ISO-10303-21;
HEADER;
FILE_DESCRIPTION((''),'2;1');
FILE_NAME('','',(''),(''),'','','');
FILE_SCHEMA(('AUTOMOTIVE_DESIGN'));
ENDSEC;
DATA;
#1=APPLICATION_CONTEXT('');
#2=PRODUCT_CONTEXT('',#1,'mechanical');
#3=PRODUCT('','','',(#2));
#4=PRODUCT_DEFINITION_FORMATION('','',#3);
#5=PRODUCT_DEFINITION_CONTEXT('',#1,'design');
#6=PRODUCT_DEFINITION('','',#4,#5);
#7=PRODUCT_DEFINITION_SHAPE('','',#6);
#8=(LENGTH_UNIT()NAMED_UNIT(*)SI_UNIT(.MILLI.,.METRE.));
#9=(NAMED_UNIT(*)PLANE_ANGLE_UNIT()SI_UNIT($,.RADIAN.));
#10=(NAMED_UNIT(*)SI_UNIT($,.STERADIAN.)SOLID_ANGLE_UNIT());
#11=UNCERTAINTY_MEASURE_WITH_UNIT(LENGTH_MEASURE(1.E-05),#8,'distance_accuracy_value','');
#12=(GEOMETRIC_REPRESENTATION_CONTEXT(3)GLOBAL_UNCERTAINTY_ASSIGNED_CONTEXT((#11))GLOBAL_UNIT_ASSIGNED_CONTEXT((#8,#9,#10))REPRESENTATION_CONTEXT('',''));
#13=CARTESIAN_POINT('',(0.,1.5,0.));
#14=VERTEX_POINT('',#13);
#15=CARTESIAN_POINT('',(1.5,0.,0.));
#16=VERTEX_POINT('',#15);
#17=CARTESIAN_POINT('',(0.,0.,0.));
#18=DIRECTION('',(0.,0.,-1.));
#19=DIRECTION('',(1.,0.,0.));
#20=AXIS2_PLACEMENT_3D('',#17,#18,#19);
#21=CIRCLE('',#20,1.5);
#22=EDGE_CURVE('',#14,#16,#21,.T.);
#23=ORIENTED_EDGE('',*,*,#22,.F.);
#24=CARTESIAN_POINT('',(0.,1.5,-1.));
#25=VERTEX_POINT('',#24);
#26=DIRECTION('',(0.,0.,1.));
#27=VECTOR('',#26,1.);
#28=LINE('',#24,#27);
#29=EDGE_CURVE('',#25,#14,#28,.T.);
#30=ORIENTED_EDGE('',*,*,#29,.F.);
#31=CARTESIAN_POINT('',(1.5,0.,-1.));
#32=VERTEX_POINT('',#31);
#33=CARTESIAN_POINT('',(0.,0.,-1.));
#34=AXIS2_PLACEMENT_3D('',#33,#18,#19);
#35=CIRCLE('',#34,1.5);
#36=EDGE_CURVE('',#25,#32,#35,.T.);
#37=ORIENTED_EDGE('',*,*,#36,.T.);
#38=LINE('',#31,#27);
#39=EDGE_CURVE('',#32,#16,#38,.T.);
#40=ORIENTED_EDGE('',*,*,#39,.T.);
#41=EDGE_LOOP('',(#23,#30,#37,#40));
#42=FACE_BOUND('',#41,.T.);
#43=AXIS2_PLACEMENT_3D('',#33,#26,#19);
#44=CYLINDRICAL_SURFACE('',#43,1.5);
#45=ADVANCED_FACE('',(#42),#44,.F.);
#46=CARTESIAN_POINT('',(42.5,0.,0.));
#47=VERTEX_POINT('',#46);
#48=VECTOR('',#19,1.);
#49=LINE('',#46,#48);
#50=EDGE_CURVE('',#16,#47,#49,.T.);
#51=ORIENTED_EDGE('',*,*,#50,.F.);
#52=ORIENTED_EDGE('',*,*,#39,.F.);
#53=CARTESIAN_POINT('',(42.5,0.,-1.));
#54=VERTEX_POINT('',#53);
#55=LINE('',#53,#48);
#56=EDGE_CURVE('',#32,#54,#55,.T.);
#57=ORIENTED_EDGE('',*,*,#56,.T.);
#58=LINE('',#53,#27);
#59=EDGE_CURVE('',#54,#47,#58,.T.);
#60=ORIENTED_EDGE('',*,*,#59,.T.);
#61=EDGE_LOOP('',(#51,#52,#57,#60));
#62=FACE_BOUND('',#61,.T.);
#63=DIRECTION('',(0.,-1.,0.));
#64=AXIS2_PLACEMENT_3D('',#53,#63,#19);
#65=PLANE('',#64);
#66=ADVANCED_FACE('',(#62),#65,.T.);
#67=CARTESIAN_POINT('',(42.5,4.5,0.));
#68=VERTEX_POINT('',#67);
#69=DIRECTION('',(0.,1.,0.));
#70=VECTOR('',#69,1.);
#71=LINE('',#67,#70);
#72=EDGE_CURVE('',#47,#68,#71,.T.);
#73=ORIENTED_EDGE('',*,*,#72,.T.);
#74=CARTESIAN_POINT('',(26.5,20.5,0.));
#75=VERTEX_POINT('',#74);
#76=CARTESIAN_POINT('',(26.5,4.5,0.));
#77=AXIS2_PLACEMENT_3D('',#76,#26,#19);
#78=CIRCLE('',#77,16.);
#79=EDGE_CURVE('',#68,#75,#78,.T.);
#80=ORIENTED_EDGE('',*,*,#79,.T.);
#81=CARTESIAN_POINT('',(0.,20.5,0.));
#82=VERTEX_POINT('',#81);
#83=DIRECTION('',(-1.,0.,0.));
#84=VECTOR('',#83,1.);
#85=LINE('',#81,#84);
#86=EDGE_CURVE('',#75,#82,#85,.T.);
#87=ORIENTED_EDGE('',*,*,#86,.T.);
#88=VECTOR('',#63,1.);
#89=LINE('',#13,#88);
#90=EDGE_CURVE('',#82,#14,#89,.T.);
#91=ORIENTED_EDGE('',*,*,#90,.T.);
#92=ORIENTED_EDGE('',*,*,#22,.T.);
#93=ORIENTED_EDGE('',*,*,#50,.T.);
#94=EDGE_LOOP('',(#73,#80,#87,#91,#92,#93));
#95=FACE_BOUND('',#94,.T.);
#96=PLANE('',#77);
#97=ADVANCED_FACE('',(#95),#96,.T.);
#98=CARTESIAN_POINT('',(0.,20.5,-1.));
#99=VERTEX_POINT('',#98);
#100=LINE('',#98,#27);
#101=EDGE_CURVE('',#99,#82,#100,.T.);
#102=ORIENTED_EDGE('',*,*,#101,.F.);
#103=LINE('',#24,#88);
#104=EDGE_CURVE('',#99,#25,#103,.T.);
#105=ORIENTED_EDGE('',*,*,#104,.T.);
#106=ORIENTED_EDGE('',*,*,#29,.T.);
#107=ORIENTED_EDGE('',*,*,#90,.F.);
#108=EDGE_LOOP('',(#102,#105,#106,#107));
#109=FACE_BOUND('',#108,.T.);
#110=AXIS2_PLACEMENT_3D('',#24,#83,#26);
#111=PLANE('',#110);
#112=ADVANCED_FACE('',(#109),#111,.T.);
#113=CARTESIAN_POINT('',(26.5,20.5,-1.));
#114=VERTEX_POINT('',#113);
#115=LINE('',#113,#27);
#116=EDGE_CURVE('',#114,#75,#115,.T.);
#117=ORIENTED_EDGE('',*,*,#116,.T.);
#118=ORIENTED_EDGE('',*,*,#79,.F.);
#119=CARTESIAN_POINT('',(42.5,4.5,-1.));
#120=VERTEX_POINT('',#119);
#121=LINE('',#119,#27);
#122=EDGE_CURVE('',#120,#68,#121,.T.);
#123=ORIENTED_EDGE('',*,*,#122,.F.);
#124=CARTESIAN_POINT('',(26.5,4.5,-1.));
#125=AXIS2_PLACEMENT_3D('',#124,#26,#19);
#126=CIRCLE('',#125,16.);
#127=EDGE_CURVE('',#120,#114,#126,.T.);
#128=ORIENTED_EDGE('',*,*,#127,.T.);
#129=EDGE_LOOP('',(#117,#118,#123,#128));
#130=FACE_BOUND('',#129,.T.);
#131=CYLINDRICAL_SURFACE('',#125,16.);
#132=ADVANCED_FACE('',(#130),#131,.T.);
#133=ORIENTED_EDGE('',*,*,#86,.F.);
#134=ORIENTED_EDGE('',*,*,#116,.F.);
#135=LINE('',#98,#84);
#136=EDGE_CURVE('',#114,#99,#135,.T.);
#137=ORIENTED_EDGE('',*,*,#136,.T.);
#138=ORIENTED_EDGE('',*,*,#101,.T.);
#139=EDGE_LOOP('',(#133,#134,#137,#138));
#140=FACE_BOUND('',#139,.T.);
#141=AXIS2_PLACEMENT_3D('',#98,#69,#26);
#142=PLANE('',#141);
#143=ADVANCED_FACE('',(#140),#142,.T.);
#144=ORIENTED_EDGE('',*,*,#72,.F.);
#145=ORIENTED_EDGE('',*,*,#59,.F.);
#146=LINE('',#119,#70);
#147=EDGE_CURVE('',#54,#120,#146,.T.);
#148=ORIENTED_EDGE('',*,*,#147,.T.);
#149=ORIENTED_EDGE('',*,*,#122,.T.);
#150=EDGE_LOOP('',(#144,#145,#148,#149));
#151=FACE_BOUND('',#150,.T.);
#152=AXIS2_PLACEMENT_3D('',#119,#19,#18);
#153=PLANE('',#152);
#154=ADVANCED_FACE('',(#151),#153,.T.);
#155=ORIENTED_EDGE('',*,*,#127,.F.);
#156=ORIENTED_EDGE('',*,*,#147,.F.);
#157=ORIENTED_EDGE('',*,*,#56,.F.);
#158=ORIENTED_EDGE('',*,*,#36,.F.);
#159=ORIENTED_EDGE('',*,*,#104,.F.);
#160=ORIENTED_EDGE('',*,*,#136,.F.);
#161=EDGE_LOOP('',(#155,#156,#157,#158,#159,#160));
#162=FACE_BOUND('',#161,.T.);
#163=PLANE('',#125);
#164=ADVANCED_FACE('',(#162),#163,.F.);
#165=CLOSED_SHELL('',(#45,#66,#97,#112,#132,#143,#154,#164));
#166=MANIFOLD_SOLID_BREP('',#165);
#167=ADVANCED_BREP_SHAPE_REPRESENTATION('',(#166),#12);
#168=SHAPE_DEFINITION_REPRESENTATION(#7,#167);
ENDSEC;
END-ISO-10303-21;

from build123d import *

# Parameters (mm, degrees)
BASE_FLANGE1_DEPTH = 1


# Sheet-metal steps are written as plain solids
with BuildPart() as part:
    # Sketch1 → Base-Flange1 (new body)
    with BuildSketch(Plane.XY):
        with BuildLine():
            Line((42.5, 4.5), (42.5, 0))
            Line((42.5, 0), (1.5, 0))
            ThreePointArc((1.5, 0), (1.060660172, 1.060660172), (0, 1.5))
            Line((0, 1.5), (0, 20.5))
            Line((0, 20.5), (26.5, 20.5))
            ThreePointArc((26.5, 20.5), (37.813708499, 15.813708499), (42.5, 4.5))
        make_face()
    extrude(amount=-BASE_FLANGE1_DEPTH)


solid = part.part
